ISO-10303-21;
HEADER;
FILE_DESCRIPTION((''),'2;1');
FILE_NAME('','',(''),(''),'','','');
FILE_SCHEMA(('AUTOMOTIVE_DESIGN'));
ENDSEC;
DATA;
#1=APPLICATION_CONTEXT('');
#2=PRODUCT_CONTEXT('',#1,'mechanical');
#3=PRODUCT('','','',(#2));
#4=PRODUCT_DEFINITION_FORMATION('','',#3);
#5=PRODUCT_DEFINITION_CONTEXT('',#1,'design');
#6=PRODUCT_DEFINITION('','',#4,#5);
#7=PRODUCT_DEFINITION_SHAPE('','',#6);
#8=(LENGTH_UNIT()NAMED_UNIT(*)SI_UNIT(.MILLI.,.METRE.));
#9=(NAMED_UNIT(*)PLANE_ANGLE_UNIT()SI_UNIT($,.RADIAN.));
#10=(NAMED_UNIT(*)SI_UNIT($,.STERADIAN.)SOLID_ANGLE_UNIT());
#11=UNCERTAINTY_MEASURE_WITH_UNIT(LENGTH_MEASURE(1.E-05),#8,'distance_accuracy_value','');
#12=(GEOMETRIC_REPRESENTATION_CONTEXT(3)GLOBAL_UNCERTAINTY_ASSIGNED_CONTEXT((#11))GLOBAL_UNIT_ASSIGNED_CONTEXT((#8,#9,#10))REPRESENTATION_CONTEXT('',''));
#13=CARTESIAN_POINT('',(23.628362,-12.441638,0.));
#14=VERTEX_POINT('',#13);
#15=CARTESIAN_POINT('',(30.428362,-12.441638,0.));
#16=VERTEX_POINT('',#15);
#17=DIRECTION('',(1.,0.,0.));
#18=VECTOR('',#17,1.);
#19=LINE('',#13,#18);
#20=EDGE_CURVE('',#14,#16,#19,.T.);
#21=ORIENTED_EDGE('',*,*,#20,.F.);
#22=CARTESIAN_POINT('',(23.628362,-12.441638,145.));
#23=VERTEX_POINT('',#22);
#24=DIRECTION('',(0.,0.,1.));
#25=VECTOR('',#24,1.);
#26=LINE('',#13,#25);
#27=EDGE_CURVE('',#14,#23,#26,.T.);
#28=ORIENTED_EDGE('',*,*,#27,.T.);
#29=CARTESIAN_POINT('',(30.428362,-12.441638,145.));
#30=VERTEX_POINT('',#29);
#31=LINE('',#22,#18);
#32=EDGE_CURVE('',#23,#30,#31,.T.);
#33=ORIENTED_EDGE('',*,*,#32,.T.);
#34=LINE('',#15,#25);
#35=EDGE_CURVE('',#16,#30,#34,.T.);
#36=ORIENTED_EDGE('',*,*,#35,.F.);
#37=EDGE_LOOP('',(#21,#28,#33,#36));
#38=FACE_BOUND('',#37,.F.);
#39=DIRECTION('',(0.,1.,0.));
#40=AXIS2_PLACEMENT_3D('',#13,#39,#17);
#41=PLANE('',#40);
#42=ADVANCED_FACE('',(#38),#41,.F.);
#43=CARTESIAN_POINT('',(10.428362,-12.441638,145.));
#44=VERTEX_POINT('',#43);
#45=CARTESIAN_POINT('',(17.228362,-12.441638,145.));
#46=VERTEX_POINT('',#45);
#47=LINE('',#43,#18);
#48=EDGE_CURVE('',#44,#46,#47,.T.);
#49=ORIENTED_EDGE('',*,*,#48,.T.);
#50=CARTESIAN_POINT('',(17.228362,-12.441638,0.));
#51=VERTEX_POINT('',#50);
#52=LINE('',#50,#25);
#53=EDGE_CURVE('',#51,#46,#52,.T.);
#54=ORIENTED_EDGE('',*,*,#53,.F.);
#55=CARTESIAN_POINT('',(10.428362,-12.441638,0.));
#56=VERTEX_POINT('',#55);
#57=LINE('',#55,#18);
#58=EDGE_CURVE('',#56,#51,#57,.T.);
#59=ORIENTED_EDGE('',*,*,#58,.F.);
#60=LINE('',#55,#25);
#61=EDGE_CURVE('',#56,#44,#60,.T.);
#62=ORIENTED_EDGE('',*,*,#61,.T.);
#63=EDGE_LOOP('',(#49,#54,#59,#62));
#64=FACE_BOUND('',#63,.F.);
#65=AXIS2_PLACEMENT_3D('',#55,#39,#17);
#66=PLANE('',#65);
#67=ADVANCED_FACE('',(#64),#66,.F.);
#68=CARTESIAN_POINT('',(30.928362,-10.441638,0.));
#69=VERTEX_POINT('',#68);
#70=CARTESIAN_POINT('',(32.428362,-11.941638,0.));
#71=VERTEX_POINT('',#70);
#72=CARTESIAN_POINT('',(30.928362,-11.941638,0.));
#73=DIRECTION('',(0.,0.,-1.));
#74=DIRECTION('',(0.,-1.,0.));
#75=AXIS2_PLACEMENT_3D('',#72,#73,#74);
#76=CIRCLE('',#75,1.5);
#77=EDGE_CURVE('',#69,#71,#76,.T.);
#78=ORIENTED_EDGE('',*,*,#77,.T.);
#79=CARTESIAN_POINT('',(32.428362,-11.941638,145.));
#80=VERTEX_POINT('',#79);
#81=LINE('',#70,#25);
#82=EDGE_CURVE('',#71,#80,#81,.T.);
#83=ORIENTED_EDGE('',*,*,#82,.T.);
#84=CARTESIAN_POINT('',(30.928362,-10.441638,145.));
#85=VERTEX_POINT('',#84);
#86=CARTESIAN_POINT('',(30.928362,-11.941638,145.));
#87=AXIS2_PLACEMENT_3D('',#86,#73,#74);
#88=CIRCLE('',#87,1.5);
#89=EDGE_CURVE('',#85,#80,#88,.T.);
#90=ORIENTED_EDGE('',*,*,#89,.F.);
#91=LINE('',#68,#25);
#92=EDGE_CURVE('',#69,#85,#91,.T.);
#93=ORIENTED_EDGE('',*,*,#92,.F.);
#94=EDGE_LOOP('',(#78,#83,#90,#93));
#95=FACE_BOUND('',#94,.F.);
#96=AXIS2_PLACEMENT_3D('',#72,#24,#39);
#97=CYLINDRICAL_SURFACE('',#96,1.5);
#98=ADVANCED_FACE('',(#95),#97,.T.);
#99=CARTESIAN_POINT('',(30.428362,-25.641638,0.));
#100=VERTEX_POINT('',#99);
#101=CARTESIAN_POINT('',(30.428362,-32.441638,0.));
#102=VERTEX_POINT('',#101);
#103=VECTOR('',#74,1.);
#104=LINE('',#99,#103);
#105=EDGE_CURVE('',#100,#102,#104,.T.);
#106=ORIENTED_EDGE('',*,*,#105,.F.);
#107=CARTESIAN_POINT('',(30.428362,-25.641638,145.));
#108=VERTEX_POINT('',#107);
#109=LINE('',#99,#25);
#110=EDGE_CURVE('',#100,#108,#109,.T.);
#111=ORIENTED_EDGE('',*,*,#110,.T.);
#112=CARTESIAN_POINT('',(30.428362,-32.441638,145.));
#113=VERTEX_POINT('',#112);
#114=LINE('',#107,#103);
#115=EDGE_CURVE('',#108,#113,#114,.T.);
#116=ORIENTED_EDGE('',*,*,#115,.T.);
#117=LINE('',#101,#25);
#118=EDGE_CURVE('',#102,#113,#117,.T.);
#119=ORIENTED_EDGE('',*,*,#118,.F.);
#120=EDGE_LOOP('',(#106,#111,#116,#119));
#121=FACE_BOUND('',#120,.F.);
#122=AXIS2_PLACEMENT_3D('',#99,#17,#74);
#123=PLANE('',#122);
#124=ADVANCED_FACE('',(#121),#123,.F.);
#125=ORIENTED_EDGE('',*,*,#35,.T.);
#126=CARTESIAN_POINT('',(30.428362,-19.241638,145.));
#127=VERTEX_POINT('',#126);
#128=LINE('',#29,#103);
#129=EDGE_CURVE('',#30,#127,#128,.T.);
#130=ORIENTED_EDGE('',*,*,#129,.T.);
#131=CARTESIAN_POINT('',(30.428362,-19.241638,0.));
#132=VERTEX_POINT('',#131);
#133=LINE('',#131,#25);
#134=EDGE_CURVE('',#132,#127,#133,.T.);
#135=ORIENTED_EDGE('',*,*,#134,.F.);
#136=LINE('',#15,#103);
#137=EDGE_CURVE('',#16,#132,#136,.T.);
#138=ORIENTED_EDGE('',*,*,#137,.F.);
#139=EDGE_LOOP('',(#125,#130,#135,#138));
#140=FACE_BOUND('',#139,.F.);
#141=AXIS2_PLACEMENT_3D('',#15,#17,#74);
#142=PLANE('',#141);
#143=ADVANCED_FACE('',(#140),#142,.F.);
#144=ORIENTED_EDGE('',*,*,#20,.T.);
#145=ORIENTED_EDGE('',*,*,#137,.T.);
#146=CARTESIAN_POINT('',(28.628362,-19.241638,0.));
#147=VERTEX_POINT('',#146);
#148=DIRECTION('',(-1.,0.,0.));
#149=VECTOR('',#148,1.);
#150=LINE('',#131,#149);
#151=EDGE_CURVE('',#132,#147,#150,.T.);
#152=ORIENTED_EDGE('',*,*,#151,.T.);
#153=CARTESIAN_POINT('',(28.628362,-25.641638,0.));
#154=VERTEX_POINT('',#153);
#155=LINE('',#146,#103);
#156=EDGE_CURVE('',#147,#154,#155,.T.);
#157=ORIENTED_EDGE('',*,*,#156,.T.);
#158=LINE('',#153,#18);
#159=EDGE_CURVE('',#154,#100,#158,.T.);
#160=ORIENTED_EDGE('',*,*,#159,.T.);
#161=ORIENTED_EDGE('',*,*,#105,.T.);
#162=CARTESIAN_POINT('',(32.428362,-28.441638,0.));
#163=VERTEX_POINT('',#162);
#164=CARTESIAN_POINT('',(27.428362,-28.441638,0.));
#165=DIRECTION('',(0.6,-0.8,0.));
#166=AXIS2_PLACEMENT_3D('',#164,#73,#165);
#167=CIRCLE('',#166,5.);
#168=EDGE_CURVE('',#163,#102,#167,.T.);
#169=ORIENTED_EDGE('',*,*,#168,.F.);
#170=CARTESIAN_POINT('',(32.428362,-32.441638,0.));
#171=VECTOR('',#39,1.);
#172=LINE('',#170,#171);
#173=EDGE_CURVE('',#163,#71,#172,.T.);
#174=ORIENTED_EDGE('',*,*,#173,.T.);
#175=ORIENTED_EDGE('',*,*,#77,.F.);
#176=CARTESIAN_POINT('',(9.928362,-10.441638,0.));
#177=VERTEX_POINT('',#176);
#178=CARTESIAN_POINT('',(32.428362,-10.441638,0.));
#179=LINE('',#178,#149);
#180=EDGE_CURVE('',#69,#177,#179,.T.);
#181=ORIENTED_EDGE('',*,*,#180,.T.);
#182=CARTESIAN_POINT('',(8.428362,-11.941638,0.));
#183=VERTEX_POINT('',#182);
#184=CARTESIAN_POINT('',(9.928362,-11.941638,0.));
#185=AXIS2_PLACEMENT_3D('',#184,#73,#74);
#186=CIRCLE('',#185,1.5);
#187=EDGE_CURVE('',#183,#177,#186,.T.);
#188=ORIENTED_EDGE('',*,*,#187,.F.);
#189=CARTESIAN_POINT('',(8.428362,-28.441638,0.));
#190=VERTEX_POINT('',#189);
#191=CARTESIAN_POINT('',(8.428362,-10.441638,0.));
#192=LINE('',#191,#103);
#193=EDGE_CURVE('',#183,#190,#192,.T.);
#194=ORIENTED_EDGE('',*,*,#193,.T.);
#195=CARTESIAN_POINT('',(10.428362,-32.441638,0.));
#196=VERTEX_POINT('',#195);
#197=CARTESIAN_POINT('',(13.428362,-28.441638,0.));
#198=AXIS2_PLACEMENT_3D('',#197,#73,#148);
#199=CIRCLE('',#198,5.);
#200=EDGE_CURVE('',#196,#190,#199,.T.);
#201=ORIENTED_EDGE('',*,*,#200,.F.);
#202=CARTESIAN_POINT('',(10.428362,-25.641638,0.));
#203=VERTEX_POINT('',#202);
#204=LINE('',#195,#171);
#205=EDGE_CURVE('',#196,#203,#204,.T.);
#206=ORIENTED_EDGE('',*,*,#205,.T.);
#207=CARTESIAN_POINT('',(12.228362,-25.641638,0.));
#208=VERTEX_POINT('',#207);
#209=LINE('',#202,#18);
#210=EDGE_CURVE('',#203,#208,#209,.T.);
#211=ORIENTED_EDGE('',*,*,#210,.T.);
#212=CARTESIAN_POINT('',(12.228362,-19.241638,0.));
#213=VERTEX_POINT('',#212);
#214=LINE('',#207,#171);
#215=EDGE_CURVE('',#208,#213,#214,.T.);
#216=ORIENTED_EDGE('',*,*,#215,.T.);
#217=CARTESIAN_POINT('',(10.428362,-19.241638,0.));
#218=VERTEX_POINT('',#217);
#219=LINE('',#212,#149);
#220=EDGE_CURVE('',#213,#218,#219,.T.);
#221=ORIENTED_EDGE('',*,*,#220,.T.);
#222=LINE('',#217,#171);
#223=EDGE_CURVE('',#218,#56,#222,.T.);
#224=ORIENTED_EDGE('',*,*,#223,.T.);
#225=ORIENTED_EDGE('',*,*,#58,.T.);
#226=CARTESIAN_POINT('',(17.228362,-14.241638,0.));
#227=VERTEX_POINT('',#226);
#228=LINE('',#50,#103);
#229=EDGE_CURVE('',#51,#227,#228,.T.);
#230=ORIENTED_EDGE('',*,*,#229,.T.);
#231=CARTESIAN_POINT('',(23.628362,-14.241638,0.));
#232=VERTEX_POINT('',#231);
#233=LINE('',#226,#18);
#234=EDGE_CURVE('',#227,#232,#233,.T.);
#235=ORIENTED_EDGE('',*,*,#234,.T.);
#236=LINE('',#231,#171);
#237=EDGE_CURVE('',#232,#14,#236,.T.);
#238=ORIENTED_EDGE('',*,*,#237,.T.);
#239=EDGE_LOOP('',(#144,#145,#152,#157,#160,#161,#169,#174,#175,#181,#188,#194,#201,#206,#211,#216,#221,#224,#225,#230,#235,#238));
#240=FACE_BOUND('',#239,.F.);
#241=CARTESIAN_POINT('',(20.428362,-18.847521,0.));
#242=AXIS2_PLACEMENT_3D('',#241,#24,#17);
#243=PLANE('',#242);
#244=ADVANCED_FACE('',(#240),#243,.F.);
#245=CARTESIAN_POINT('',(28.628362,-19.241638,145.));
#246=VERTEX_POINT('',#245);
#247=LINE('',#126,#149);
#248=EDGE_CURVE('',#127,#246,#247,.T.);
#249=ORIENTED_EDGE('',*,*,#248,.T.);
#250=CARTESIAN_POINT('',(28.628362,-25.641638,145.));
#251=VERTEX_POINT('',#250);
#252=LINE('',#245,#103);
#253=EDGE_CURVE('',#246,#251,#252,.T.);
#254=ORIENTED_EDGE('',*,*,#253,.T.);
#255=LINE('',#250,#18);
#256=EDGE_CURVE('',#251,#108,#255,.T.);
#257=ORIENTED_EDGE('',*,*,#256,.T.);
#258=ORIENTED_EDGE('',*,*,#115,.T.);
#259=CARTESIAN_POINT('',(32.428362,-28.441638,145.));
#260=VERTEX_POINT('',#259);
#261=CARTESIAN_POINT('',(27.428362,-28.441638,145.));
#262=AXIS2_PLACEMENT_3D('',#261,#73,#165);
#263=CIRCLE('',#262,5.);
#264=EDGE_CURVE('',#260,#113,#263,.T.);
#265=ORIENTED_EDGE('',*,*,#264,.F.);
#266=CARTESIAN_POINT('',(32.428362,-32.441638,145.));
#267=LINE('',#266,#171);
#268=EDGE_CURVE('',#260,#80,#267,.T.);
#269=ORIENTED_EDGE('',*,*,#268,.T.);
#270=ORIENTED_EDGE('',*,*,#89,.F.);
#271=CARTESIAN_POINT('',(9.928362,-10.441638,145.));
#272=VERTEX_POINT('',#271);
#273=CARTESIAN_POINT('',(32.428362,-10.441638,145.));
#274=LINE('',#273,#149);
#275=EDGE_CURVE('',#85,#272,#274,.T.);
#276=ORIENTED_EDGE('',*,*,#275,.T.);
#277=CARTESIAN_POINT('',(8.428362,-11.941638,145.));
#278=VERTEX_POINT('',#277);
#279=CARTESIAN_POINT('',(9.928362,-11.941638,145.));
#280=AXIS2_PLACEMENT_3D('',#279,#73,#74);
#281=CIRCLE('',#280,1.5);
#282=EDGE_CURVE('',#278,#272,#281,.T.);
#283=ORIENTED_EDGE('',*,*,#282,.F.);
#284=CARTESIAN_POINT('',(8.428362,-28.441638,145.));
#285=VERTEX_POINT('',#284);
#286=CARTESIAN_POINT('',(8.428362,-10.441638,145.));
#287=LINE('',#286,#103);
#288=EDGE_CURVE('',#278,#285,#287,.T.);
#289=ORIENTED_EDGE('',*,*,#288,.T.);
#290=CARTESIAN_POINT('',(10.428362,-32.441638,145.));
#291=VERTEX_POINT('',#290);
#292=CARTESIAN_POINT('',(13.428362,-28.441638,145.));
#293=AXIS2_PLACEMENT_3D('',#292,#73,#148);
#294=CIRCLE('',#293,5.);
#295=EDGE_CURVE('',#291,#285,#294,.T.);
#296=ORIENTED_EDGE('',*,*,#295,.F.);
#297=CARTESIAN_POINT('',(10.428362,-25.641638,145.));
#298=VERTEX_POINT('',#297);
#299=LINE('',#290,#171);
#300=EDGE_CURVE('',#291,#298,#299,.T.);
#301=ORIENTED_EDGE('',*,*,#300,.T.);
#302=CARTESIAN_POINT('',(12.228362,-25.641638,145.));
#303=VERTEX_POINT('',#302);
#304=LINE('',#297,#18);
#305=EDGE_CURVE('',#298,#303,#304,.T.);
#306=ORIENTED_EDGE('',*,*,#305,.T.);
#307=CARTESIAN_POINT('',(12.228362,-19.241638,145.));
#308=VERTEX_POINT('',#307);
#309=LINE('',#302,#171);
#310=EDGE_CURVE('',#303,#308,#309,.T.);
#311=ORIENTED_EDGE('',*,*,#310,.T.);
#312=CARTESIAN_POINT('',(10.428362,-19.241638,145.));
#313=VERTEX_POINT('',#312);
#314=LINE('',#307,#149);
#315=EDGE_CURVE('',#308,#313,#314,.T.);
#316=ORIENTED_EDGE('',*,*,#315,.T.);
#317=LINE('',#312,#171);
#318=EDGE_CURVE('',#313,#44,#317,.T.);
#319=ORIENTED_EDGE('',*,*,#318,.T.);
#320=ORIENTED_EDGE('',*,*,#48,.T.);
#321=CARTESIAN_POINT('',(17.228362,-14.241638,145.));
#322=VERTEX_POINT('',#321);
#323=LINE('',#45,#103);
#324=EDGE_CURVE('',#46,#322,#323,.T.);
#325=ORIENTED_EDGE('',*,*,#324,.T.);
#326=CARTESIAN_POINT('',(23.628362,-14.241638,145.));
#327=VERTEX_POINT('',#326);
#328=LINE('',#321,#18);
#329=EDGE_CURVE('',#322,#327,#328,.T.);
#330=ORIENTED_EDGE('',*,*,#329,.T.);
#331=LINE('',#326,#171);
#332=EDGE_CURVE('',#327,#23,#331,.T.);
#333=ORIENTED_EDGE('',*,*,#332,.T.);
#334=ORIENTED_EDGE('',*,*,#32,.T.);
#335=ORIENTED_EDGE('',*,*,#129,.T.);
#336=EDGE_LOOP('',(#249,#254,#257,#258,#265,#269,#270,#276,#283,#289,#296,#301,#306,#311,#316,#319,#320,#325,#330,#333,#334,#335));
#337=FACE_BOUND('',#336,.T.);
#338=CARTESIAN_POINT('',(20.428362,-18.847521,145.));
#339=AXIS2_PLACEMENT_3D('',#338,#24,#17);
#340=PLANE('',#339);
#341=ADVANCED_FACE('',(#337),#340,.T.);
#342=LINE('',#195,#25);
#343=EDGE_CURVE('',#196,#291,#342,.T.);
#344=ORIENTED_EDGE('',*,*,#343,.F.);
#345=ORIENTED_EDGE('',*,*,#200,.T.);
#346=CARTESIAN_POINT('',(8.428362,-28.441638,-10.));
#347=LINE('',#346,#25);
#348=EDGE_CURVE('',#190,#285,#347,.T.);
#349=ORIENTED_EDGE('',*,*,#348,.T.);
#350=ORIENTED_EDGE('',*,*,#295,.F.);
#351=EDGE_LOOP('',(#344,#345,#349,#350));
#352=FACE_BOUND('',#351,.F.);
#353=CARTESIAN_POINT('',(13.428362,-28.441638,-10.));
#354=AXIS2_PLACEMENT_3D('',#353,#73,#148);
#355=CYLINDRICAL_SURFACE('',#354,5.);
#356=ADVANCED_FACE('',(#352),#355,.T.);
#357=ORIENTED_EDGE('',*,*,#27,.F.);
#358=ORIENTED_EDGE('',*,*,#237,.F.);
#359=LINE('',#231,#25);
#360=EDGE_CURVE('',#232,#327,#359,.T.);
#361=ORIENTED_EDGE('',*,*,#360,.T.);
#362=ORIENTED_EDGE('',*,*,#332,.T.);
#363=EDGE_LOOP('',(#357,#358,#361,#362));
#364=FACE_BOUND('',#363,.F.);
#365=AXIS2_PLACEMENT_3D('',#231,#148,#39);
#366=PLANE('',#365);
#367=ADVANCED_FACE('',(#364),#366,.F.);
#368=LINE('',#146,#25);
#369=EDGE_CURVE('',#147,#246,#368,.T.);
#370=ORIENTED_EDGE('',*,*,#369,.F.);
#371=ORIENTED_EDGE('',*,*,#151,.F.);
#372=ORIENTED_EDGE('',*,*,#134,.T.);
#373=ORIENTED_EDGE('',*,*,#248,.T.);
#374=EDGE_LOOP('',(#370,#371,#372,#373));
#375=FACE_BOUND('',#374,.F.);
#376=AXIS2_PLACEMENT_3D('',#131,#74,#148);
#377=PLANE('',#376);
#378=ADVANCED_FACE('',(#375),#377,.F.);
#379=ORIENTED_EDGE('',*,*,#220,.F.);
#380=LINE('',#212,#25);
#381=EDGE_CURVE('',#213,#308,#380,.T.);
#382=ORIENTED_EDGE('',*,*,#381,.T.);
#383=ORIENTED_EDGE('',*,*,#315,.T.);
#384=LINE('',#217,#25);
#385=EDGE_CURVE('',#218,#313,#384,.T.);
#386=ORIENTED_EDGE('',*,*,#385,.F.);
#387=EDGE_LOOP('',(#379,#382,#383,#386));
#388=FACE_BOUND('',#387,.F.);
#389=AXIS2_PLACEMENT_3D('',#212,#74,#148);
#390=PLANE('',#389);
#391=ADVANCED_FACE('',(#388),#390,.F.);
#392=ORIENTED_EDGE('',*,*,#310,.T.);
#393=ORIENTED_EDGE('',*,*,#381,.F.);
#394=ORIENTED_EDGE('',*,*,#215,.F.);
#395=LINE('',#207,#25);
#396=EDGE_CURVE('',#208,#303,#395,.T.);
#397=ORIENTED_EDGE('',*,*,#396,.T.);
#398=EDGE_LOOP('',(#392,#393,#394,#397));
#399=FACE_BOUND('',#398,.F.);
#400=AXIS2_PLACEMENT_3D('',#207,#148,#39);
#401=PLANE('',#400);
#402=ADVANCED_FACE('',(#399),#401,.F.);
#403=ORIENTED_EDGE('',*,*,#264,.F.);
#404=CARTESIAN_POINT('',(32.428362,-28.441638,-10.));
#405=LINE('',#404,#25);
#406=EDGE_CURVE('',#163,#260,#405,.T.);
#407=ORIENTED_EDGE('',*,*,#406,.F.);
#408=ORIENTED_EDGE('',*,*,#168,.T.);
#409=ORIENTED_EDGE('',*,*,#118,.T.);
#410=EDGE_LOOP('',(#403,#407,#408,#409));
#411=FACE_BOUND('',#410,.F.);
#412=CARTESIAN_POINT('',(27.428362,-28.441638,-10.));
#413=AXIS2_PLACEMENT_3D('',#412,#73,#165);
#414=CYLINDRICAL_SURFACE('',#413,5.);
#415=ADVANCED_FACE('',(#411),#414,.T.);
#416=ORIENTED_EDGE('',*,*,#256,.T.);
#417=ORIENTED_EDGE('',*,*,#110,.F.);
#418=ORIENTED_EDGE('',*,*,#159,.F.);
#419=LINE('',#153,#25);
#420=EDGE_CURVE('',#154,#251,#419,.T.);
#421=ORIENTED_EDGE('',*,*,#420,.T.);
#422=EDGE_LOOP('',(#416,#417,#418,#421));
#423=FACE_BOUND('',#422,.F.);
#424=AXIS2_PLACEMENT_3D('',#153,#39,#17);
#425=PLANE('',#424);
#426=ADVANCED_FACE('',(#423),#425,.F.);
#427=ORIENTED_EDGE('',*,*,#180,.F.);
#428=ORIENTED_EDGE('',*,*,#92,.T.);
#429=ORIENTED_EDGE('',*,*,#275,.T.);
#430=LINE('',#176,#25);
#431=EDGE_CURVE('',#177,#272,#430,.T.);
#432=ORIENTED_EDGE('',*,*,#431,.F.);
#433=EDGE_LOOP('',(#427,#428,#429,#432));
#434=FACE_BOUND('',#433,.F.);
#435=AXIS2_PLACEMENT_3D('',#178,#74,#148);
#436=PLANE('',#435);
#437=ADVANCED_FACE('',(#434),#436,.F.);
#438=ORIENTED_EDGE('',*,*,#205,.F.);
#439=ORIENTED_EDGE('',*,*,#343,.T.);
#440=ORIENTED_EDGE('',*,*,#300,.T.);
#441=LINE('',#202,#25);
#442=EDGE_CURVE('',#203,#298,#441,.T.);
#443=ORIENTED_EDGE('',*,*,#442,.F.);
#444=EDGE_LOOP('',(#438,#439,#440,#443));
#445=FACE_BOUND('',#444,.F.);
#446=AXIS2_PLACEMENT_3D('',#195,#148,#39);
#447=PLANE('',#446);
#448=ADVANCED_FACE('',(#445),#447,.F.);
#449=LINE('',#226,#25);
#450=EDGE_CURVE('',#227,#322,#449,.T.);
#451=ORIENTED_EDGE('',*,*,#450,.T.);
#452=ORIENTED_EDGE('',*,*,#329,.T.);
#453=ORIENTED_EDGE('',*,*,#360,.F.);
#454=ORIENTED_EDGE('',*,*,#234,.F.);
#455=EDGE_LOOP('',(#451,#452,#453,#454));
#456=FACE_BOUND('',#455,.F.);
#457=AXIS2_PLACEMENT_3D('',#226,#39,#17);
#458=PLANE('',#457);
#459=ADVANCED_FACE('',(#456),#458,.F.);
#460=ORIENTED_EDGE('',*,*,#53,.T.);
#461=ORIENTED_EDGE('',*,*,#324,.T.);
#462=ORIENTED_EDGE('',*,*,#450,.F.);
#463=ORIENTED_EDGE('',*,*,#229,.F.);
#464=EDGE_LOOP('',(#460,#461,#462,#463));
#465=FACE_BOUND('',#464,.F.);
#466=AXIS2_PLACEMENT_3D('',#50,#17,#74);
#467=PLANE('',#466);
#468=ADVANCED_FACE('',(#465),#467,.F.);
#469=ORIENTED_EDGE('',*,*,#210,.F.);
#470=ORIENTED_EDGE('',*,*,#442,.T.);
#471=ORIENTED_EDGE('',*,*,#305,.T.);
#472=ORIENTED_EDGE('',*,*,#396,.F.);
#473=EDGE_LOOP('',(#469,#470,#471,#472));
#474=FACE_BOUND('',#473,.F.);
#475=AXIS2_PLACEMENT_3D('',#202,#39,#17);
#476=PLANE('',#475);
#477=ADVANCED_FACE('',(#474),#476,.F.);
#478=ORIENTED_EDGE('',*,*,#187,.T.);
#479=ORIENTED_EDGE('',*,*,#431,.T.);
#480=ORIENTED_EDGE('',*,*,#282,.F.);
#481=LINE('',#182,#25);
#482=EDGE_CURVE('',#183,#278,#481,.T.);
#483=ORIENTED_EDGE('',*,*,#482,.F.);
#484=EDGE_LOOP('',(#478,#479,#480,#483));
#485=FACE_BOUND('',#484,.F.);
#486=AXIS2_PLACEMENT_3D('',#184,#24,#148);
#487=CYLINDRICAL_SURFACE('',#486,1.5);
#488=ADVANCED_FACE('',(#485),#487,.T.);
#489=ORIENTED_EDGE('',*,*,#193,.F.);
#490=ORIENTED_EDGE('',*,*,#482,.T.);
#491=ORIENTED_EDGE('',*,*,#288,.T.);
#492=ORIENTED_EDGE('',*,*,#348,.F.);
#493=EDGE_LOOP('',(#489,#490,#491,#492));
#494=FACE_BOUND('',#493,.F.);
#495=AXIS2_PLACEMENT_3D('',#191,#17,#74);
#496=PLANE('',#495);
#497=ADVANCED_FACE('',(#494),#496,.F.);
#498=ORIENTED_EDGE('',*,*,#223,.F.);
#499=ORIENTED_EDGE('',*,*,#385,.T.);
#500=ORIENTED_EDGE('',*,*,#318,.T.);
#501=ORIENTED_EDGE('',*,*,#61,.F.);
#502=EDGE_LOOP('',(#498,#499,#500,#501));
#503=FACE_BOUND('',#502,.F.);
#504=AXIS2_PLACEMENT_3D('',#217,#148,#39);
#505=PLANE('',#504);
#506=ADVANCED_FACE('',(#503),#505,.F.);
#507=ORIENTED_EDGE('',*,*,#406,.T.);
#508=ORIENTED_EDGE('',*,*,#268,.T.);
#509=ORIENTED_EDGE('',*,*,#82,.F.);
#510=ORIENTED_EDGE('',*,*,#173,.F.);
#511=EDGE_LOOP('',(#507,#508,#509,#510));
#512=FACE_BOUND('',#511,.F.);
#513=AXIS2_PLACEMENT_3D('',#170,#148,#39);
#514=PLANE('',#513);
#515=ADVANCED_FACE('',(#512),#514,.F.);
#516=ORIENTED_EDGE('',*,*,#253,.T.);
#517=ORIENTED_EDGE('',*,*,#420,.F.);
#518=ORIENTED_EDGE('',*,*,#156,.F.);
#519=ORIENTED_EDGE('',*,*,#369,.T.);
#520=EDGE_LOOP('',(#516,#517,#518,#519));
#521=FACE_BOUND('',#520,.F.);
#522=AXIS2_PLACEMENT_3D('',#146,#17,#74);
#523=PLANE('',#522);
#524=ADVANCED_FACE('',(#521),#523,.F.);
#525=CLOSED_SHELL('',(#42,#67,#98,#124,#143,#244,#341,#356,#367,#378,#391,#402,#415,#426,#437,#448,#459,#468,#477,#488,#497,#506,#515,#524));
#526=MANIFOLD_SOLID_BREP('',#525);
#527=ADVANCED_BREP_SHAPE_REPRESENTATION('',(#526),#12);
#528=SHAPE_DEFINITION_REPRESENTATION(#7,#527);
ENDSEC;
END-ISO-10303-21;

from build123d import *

# Parameters (mm, degrees)
F1_DEPTH    = 145
F2_T1_DEPTH = 165
F3_R        = 1.5


# Not quite as in the source:
# - a fillet or chamfer that OpenCascade refuses, or shapes differently, is made with other operations: its cross-section is extruded or revolved along the edge and cut away or added


with BuildPart() as f1:
    # F0 (on Top) → F1 (new body)
    with BuildSketch(Plane.XY):
        Polygon((8.4283615947, -32.4416384101), (10.4283615947, -32.4416384101), (10.4283615947, -25.6416384101), (12.2283615947, -25.6416384101), (12.2283615947, -19.2416384101), (10.4283615947, -19.2416384101), (10.4283615947, -12.4416384101), (17.2283615947, -12.4416384101), (17.2283615947, -14.2416384101), (23.6283615947, -14.2416384101), (23.6283615947, -12.4416384101), (30.4283615947, -12.4416384101), (30.4283615947, -19.2416384101), (28.6283615947, -19.2416384101), (28.6283615947, -25.6416384101), (30.4283615947, -25.6416384101), (30.4283615947, -32.4416384101), (32.4283615947, -32.4416384101), (32.4283615947, -10.4416384101), (8.4283615947, -10.4416384101), align=None)
    extrude(amount=F1_DEPTH)

    # F2: fillet of radius 5 on 2 edges, made by hand

    # F2_s2 → F2_t1 (cut)
    with BuildSketch(Plane.XY.offset(-10)):
        with BuildLine():
            ThreePointArc((8.4283615947, -28.4416384101), (8.9562256397, -30.6777063876), (10.4283615947, -32.4416384101))
            Line((10.4283615947, -32.4416384101), (8.4283615947, -32.4416384101))
            Line((8.4283615947, -32.4416384101), (8.4283615947, -28.4416384101))
        make_face()
        with BuildLine():
            ThreePointArc((30.4283615947, -32.4416384101), (31.9004975497, -30.6777063876), (32.4283615947, -28.4416384101))
            Line((32.4283615947, -28.4416384101), (32.4283615947, -32.4416384101))
            Line((32.4283615947, -32.4416384101), (30.4283615947, -32.4416384101))
        make_face()
    extrude(amount=F2_T1_DEPTH, mode=Mode.SUBTRACT)

    # F3
    f3_edges = [f1.edges().sort_by_distance(p)[0] for p in [
        (8.428362, -10.441638, 72.5),
        (32.428362, -10.441638, 72.5),
    ]]
    fillet(f3_edges, radius=F3_R)


solid = f1.part
